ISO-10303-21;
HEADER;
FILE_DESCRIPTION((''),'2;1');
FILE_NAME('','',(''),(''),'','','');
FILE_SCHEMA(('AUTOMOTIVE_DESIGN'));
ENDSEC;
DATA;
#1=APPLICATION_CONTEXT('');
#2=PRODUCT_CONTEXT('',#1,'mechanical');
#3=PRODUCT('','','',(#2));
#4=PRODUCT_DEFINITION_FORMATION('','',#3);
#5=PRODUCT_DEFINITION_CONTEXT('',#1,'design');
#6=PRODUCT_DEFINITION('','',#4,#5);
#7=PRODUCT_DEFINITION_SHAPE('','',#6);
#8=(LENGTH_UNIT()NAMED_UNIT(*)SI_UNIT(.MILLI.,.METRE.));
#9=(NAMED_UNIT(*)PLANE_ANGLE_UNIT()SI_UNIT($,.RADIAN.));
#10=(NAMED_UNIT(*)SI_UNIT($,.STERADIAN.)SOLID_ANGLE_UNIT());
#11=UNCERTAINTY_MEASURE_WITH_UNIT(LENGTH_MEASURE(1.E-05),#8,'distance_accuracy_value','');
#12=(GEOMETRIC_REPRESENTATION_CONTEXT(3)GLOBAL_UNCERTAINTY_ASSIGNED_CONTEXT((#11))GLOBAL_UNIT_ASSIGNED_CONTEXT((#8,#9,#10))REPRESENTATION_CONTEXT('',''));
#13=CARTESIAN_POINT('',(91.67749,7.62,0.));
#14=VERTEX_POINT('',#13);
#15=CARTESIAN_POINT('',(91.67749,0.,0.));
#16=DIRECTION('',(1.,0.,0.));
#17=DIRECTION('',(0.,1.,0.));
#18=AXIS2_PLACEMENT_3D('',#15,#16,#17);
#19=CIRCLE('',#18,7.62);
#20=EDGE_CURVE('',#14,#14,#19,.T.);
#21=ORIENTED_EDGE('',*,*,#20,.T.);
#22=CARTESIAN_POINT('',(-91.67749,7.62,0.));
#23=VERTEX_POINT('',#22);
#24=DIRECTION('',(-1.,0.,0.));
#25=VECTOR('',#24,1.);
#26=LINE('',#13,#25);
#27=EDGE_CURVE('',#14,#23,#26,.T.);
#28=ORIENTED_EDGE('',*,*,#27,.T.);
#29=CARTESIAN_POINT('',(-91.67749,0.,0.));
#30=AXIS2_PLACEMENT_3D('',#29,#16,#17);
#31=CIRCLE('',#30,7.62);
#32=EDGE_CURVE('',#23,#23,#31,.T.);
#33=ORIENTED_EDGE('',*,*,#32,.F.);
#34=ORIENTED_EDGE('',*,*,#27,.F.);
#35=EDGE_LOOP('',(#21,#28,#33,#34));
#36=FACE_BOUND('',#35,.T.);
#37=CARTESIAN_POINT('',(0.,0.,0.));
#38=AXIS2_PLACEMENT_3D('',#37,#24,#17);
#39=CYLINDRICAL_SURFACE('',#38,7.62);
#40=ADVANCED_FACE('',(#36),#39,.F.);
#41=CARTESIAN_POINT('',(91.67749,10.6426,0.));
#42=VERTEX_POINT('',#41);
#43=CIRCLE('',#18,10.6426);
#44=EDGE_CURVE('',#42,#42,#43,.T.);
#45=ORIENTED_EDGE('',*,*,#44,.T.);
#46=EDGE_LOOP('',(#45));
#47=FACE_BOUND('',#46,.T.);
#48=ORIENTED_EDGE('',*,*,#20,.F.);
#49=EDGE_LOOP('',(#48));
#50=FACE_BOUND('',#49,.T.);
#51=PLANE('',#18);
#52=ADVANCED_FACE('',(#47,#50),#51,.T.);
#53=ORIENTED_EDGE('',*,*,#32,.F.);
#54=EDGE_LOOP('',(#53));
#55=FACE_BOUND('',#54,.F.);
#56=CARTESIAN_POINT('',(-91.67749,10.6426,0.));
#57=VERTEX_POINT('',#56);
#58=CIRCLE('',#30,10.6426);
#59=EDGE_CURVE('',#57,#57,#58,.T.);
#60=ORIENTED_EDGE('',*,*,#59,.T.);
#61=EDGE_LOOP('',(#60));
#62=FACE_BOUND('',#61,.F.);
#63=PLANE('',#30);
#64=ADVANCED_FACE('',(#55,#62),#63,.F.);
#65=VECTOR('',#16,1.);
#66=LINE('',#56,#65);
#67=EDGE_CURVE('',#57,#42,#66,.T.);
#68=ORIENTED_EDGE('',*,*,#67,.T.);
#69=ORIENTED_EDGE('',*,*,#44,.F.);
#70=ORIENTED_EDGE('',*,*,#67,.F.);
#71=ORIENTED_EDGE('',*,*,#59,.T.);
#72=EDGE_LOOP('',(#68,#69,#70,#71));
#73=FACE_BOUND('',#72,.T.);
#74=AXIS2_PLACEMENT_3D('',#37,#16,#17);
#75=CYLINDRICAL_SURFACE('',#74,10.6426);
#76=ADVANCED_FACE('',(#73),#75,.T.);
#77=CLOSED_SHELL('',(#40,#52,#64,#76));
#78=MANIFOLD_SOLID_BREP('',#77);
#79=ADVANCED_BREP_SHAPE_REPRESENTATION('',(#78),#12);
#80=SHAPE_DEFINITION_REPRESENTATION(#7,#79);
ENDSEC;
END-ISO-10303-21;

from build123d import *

# Parameters (mm, degrees)
F0_R     = 10.6426
F0_R_2   = 7.62
F1_DEPTH = 91.67749


# Not quite as in the source:
# - a length typed as a fraction of an inch, garbled in the dataset ("3 / 203.2 mm" for 3/8 in), is restored


with BuildPart() as f1:
    # F0 (on Right) → F1 (new body, symmetric)
    with BuildSketch(Plane.YZ):
        Circle(F0_R)
        Circle(F0_R_2, mode=Mode.SUBTRACT)
    extrude(amount=F1_DEPTH, both=True)


solid = f1.part
